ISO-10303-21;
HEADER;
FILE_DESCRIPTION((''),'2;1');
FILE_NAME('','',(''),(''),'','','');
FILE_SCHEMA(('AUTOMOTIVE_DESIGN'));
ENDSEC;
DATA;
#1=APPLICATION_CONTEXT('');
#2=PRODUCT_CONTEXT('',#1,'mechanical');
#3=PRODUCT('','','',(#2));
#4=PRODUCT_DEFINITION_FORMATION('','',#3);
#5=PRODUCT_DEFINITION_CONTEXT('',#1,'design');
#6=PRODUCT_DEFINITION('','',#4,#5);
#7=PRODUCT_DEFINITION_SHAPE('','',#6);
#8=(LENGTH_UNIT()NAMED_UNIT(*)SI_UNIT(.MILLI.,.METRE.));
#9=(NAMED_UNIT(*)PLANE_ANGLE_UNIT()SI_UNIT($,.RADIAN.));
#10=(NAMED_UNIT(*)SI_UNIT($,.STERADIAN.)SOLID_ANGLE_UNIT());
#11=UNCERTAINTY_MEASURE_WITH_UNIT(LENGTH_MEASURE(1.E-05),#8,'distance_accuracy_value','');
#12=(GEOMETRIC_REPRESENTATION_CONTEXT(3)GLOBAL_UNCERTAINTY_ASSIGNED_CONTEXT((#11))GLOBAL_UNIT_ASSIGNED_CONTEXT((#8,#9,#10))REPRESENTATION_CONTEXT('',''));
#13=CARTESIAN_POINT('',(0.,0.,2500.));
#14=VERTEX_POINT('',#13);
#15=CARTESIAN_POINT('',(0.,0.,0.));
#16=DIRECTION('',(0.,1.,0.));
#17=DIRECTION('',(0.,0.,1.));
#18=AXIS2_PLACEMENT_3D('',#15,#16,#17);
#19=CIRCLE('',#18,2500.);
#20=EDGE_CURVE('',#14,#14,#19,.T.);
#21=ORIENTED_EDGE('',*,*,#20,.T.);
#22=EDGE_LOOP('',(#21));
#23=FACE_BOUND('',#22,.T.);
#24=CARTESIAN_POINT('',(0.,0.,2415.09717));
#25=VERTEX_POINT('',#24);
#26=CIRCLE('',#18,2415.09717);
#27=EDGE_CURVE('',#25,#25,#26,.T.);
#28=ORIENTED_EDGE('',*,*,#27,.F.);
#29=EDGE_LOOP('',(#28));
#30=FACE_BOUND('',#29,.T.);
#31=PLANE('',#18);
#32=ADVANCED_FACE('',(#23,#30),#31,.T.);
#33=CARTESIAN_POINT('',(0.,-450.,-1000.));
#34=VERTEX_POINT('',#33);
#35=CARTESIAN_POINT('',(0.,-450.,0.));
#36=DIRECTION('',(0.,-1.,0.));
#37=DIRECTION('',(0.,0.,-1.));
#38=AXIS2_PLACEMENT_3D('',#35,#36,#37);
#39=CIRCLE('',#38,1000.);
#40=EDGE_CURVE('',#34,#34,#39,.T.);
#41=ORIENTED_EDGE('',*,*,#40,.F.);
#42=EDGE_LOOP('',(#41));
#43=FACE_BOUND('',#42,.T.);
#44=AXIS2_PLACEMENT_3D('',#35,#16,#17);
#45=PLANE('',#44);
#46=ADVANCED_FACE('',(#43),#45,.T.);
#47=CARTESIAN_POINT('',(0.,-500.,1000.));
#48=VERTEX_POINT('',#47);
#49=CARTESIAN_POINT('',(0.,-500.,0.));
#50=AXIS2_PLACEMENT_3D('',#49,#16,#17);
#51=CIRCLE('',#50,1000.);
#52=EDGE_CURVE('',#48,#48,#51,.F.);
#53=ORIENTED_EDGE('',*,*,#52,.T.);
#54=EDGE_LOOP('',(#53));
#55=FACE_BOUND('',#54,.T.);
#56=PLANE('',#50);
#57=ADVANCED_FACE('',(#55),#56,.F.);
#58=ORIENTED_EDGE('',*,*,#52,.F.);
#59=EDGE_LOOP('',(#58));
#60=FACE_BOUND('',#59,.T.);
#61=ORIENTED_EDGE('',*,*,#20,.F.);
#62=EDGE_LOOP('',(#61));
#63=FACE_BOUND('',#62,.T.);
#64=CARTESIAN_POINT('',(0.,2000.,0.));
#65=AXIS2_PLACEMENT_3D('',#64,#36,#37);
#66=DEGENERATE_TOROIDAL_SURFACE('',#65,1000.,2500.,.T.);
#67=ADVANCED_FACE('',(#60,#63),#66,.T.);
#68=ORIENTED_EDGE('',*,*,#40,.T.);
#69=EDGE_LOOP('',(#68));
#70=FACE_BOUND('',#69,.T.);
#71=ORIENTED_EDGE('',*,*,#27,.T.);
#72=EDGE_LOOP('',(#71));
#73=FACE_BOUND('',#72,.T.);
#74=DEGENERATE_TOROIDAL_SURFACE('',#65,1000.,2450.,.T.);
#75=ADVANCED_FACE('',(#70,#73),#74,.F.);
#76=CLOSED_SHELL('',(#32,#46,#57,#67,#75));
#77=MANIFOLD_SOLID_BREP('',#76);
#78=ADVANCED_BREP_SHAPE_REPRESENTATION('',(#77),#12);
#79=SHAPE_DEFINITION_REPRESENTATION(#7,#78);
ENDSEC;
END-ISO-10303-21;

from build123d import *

# Parameters (mm, degrees)
SKETCH1_R           = 2500
BOSS_EXTRUDE1_DEPTH = 500
FILLET1_R           = 2500
SHELL1_T            = -50


with BuildPart() as part:
    # Sketch1 → Boss-Extrude1 (new body)
    with BuildSketch(Plane(origin=(0, 0, 0), x_dir=(1, 0, 0), z_dir=(0, 1, 0))):
        with Locations(Location((0, 0, 0), (0, 0, 270))):
            Circle(SKETCH1_R)
    extrude(amount=-BOSS_EXTRUDE1_DEPTH)

    # Fillet1
    # the kernel refuses this fillet: 2500 mm, written as the material it takes off along each edge
    with BuildSketch(Plane(origin=(0, -500, 0), x_dir=(0, 0, 1), z_dir=(-1, 0, 0))) as fillet1_piece_1:
        with BuildLine():
            CenterArc((1000, 2500), FILLET1_R, 270, 36.869897646)
            Line((1000, 0), (1000, -50))
            Line((1000, -50), (2500, -50))
            Line((2500, -50), (2550, 0))
            ThreePointArc((2550, 0), (2550, 250), (2530, 460))
            Line((2530, 460), (2500, 500))
        make_face()
    revolve(axis=Axis((0, -500, 0), (0, 1, 0)), mode=Mode.SUBTRACT)

    # Shell1
    shell1_openings = [part.faces().sort_by_distance(p)[0] for p in [
        (0, 0, 0),
    ]]
    offset(amount=SHELL1_T, openings=shell1_openings, kind=Kind.INTERSECTION)


solid = part.part
